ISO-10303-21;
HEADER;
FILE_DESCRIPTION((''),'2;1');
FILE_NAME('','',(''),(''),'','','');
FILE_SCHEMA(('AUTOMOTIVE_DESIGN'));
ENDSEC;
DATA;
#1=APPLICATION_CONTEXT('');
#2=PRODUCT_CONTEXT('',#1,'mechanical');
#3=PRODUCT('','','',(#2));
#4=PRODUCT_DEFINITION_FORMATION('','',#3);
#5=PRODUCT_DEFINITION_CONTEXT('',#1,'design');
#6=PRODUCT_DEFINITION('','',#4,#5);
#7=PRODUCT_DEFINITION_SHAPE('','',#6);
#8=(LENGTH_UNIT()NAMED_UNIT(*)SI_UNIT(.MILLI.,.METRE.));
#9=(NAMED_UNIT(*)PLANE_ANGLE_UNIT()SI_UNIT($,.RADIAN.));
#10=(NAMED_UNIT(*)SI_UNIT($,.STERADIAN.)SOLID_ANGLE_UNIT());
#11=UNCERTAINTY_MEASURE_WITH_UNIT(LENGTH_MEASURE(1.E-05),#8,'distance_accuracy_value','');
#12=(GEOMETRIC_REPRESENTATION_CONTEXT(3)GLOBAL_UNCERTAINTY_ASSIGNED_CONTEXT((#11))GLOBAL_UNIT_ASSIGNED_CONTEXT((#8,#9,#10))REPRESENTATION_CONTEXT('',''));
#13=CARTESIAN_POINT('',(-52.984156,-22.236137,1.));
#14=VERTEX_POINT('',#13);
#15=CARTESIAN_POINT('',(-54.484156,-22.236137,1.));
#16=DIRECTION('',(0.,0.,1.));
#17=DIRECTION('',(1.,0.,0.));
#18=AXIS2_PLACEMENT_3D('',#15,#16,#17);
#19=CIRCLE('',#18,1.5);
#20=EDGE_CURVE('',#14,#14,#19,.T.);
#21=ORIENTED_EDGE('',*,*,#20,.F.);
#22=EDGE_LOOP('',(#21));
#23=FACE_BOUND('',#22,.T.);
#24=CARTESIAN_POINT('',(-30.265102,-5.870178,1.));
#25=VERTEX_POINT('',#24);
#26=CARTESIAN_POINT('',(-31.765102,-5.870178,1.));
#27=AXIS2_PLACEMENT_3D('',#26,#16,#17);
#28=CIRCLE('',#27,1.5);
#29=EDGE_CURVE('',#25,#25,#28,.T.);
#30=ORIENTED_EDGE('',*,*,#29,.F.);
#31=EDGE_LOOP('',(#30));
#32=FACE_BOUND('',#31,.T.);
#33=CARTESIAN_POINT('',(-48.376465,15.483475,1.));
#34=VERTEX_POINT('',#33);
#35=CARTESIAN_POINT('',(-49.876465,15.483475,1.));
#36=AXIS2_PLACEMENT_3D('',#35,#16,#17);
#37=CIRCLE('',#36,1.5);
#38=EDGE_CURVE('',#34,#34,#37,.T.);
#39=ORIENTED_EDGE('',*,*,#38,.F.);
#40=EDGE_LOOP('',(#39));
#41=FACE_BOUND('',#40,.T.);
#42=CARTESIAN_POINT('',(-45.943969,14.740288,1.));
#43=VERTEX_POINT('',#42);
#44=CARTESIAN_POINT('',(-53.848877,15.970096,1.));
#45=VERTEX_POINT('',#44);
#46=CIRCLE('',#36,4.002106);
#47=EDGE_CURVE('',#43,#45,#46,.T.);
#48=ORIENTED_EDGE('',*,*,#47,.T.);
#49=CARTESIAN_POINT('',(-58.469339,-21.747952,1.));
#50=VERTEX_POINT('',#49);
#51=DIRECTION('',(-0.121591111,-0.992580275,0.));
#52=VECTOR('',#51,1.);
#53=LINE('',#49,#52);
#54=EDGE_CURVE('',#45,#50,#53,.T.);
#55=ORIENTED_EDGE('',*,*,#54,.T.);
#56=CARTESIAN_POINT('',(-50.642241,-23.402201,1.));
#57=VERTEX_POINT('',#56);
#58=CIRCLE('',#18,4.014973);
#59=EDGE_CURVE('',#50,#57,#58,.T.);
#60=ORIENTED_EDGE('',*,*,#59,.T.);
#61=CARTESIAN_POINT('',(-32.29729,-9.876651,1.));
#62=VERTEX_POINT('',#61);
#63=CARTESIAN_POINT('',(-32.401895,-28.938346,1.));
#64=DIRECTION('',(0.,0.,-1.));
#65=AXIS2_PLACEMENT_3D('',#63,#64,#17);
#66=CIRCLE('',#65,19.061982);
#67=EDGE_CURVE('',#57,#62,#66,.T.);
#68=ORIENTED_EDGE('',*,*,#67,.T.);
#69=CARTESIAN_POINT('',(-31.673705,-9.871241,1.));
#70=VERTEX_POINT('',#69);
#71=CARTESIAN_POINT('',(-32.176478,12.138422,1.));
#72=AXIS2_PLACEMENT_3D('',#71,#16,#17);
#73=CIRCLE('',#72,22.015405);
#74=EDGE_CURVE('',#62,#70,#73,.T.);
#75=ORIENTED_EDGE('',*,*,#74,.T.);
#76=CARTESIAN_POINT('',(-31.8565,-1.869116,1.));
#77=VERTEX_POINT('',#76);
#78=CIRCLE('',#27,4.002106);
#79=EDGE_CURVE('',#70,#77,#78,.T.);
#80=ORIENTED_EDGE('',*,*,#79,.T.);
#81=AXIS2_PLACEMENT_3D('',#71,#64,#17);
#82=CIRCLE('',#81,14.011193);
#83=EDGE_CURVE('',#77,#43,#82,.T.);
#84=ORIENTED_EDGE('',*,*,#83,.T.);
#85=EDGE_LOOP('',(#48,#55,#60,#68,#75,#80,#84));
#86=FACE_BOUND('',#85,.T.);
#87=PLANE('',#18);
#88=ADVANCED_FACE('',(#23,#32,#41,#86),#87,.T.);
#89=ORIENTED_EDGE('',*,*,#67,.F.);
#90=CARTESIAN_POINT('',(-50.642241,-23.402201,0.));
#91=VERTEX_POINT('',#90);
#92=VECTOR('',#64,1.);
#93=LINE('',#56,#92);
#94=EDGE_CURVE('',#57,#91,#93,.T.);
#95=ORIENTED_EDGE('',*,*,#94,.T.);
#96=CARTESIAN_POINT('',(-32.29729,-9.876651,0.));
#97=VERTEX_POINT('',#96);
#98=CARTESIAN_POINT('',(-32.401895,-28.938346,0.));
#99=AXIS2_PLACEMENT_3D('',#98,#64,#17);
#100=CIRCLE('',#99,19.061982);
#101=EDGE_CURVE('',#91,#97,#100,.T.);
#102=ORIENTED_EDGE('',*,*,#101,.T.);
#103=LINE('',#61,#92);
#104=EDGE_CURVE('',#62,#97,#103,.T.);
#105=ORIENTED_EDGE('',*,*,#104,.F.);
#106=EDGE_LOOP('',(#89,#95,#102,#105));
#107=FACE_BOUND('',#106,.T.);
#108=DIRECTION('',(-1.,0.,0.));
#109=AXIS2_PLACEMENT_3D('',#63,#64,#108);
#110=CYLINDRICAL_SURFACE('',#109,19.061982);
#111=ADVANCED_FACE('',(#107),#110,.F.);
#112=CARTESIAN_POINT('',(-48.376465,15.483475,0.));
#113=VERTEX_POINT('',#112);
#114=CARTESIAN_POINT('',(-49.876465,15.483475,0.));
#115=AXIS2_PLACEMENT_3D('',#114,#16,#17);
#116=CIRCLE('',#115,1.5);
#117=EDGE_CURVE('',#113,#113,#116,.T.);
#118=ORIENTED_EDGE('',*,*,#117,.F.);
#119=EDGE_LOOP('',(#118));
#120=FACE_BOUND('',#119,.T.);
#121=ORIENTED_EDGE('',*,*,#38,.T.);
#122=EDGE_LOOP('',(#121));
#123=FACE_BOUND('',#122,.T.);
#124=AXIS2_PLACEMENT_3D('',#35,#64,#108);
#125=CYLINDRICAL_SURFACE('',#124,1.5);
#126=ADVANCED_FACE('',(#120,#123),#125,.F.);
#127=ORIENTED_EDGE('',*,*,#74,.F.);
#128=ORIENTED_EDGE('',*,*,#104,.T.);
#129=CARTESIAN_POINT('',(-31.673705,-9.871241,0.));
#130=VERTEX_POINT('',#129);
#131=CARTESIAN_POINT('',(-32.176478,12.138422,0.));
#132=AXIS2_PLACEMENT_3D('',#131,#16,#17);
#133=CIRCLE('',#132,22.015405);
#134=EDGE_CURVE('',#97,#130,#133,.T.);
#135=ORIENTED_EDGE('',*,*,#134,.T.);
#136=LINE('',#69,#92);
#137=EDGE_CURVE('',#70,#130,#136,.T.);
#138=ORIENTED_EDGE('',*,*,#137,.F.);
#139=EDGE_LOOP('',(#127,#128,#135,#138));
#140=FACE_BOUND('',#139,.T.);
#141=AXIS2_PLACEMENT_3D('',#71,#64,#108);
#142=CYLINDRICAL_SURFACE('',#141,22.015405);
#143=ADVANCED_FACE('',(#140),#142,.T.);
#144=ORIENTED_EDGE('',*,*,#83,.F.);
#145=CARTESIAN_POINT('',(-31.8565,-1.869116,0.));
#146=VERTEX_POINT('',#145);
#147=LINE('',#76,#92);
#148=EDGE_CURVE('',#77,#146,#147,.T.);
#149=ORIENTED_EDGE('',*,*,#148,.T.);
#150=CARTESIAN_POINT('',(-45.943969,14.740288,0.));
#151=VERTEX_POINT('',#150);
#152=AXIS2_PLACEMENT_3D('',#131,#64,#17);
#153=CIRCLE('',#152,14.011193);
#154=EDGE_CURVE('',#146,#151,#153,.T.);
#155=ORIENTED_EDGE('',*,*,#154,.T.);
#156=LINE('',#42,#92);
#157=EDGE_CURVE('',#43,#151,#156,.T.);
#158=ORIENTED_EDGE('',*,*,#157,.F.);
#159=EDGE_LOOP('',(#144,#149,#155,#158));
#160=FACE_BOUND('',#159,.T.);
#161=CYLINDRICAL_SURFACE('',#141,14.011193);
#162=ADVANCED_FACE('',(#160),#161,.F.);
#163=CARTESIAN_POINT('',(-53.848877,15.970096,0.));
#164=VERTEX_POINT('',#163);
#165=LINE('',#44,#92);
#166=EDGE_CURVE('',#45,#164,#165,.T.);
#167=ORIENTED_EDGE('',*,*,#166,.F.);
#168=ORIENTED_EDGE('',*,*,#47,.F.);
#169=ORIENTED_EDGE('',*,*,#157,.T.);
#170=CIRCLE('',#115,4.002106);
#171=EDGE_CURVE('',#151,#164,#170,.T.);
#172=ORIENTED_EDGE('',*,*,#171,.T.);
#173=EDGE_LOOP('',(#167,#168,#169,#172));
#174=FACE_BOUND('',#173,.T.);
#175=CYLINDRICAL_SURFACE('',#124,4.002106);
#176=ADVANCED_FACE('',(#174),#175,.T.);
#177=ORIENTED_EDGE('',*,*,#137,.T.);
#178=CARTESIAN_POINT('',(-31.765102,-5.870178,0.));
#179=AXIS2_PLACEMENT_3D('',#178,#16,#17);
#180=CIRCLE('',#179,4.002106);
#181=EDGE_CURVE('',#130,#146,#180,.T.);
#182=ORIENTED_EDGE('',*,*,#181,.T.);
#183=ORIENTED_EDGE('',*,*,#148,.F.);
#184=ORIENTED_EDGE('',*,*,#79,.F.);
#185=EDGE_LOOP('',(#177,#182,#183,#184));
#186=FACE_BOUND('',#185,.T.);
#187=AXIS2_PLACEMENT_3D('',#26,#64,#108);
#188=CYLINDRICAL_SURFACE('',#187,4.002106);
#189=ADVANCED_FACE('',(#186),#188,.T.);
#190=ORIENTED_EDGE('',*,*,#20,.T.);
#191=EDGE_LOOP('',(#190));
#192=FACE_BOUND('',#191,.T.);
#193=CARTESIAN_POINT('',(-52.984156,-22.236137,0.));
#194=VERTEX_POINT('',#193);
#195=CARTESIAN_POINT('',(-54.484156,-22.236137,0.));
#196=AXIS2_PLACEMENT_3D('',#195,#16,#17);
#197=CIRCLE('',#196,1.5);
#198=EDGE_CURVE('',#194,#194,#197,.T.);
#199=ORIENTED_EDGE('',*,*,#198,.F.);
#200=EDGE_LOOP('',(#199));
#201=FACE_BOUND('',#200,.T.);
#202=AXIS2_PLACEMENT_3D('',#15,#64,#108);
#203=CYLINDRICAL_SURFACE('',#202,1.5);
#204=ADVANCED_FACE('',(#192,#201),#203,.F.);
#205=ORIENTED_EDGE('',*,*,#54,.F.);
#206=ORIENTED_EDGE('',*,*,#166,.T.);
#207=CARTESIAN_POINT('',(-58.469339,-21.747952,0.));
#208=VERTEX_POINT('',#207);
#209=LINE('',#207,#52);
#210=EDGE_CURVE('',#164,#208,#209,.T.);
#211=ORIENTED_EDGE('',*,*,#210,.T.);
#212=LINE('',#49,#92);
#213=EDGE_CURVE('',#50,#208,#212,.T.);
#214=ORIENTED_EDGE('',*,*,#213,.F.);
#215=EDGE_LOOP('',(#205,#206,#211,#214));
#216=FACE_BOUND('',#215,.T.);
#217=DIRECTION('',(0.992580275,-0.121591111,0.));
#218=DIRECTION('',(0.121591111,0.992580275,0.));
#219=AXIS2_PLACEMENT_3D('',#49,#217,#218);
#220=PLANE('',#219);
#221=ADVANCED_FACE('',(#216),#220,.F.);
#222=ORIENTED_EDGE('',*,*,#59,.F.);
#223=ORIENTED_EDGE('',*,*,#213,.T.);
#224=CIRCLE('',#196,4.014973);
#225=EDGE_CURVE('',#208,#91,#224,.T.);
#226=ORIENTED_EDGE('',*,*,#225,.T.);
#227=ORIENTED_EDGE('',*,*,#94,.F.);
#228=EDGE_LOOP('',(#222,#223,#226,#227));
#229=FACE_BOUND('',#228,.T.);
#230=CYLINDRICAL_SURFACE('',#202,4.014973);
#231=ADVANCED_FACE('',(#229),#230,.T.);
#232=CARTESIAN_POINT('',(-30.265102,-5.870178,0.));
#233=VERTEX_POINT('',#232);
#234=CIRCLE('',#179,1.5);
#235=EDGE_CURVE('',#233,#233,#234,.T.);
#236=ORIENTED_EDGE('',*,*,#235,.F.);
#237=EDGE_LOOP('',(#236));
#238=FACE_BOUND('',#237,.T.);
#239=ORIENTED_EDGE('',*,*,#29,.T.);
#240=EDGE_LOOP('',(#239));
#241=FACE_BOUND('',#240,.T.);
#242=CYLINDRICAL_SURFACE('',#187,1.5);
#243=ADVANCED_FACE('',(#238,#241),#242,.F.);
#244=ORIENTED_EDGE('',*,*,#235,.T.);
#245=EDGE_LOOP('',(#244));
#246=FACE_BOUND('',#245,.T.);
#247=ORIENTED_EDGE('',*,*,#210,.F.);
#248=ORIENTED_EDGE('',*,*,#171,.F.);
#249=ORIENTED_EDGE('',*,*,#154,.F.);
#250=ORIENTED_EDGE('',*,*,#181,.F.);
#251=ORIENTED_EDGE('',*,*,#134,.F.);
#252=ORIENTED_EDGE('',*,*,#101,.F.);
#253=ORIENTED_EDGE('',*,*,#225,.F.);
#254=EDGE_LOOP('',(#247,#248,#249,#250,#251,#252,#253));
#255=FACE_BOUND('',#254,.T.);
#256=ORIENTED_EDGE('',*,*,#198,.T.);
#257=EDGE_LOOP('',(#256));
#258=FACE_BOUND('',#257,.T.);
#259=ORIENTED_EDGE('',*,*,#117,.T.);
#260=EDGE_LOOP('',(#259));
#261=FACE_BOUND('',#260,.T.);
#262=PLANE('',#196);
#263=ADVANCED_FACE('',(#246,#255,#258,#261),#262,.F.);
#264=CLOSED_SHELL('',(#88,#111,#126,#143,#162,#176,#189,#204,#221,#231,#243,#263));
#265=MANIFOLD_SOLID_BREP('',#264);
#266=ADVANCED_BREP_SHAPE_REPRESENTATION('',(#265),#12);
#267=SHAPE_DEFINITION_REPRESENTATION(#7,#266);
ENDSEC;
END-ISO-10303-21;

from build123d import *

# Parameters (mm, degrees)
ESQUISSE1_R               = 1.5
T_LE_DE_BASE_PLI_E1_DEPTH = 1


# Sheet-metal steps are written as plain solids
with BuildPart() as part:
    # Esquisse1 → Tôle de base pliée1 (new body)
    with BuildSketch(Plane.XY):
        with BuildLine():
            Line((-58.469338958, -21.747952398), (-53.848876988, 15.970095876))
            ThreePointArc((-53.848876988, 15.970095876), (-49.26123741, 19.438010656), (-45.943968874, 14.740287881))
            ThreePointArc((-45.943968874, 14.740287881), (-42.861840407, 3.075501185), (-31.856499609, -1.869115936))
            ThreePointArc((-31.856499609, -1.869115936), (-27.76403967, -5.778781082), (-31.673704815, -9.871241021))
            ThreePointArc((-31.673704815, -9.871241021), (-31.985478135, -9.876154218), (-32.297289768, -9.876651277))
            ThreePointArc((-32.297289768, -9.876651277), (-43.713897158, -13.595668804), (-50.642240989, -23.40220068))
            ThreePointArc((-50.642240989, -23.40220068), (-55.314375936, -26.164336213), (-58.469338958, -21.747952398))
        make_face()
        with Locations((-54.484155586, -22.236137473)):
            Circle(ESQUISSE1_R, mode=Mode.SUBTRACT)
        with Locations((-31.765102212, -5.870178479)):
            Circle(ESQUISSE1_R, mode=Mode.SUBTRACT)
        with Locations((-49.876465203, 15.483475321)):
            Circle(ESQUISSE1_R, mode=Mode.SUBTRACT)
    extrude(amount=T_LE_DE_BASE_PLI_E1_DEPTH)


solid = part.part
